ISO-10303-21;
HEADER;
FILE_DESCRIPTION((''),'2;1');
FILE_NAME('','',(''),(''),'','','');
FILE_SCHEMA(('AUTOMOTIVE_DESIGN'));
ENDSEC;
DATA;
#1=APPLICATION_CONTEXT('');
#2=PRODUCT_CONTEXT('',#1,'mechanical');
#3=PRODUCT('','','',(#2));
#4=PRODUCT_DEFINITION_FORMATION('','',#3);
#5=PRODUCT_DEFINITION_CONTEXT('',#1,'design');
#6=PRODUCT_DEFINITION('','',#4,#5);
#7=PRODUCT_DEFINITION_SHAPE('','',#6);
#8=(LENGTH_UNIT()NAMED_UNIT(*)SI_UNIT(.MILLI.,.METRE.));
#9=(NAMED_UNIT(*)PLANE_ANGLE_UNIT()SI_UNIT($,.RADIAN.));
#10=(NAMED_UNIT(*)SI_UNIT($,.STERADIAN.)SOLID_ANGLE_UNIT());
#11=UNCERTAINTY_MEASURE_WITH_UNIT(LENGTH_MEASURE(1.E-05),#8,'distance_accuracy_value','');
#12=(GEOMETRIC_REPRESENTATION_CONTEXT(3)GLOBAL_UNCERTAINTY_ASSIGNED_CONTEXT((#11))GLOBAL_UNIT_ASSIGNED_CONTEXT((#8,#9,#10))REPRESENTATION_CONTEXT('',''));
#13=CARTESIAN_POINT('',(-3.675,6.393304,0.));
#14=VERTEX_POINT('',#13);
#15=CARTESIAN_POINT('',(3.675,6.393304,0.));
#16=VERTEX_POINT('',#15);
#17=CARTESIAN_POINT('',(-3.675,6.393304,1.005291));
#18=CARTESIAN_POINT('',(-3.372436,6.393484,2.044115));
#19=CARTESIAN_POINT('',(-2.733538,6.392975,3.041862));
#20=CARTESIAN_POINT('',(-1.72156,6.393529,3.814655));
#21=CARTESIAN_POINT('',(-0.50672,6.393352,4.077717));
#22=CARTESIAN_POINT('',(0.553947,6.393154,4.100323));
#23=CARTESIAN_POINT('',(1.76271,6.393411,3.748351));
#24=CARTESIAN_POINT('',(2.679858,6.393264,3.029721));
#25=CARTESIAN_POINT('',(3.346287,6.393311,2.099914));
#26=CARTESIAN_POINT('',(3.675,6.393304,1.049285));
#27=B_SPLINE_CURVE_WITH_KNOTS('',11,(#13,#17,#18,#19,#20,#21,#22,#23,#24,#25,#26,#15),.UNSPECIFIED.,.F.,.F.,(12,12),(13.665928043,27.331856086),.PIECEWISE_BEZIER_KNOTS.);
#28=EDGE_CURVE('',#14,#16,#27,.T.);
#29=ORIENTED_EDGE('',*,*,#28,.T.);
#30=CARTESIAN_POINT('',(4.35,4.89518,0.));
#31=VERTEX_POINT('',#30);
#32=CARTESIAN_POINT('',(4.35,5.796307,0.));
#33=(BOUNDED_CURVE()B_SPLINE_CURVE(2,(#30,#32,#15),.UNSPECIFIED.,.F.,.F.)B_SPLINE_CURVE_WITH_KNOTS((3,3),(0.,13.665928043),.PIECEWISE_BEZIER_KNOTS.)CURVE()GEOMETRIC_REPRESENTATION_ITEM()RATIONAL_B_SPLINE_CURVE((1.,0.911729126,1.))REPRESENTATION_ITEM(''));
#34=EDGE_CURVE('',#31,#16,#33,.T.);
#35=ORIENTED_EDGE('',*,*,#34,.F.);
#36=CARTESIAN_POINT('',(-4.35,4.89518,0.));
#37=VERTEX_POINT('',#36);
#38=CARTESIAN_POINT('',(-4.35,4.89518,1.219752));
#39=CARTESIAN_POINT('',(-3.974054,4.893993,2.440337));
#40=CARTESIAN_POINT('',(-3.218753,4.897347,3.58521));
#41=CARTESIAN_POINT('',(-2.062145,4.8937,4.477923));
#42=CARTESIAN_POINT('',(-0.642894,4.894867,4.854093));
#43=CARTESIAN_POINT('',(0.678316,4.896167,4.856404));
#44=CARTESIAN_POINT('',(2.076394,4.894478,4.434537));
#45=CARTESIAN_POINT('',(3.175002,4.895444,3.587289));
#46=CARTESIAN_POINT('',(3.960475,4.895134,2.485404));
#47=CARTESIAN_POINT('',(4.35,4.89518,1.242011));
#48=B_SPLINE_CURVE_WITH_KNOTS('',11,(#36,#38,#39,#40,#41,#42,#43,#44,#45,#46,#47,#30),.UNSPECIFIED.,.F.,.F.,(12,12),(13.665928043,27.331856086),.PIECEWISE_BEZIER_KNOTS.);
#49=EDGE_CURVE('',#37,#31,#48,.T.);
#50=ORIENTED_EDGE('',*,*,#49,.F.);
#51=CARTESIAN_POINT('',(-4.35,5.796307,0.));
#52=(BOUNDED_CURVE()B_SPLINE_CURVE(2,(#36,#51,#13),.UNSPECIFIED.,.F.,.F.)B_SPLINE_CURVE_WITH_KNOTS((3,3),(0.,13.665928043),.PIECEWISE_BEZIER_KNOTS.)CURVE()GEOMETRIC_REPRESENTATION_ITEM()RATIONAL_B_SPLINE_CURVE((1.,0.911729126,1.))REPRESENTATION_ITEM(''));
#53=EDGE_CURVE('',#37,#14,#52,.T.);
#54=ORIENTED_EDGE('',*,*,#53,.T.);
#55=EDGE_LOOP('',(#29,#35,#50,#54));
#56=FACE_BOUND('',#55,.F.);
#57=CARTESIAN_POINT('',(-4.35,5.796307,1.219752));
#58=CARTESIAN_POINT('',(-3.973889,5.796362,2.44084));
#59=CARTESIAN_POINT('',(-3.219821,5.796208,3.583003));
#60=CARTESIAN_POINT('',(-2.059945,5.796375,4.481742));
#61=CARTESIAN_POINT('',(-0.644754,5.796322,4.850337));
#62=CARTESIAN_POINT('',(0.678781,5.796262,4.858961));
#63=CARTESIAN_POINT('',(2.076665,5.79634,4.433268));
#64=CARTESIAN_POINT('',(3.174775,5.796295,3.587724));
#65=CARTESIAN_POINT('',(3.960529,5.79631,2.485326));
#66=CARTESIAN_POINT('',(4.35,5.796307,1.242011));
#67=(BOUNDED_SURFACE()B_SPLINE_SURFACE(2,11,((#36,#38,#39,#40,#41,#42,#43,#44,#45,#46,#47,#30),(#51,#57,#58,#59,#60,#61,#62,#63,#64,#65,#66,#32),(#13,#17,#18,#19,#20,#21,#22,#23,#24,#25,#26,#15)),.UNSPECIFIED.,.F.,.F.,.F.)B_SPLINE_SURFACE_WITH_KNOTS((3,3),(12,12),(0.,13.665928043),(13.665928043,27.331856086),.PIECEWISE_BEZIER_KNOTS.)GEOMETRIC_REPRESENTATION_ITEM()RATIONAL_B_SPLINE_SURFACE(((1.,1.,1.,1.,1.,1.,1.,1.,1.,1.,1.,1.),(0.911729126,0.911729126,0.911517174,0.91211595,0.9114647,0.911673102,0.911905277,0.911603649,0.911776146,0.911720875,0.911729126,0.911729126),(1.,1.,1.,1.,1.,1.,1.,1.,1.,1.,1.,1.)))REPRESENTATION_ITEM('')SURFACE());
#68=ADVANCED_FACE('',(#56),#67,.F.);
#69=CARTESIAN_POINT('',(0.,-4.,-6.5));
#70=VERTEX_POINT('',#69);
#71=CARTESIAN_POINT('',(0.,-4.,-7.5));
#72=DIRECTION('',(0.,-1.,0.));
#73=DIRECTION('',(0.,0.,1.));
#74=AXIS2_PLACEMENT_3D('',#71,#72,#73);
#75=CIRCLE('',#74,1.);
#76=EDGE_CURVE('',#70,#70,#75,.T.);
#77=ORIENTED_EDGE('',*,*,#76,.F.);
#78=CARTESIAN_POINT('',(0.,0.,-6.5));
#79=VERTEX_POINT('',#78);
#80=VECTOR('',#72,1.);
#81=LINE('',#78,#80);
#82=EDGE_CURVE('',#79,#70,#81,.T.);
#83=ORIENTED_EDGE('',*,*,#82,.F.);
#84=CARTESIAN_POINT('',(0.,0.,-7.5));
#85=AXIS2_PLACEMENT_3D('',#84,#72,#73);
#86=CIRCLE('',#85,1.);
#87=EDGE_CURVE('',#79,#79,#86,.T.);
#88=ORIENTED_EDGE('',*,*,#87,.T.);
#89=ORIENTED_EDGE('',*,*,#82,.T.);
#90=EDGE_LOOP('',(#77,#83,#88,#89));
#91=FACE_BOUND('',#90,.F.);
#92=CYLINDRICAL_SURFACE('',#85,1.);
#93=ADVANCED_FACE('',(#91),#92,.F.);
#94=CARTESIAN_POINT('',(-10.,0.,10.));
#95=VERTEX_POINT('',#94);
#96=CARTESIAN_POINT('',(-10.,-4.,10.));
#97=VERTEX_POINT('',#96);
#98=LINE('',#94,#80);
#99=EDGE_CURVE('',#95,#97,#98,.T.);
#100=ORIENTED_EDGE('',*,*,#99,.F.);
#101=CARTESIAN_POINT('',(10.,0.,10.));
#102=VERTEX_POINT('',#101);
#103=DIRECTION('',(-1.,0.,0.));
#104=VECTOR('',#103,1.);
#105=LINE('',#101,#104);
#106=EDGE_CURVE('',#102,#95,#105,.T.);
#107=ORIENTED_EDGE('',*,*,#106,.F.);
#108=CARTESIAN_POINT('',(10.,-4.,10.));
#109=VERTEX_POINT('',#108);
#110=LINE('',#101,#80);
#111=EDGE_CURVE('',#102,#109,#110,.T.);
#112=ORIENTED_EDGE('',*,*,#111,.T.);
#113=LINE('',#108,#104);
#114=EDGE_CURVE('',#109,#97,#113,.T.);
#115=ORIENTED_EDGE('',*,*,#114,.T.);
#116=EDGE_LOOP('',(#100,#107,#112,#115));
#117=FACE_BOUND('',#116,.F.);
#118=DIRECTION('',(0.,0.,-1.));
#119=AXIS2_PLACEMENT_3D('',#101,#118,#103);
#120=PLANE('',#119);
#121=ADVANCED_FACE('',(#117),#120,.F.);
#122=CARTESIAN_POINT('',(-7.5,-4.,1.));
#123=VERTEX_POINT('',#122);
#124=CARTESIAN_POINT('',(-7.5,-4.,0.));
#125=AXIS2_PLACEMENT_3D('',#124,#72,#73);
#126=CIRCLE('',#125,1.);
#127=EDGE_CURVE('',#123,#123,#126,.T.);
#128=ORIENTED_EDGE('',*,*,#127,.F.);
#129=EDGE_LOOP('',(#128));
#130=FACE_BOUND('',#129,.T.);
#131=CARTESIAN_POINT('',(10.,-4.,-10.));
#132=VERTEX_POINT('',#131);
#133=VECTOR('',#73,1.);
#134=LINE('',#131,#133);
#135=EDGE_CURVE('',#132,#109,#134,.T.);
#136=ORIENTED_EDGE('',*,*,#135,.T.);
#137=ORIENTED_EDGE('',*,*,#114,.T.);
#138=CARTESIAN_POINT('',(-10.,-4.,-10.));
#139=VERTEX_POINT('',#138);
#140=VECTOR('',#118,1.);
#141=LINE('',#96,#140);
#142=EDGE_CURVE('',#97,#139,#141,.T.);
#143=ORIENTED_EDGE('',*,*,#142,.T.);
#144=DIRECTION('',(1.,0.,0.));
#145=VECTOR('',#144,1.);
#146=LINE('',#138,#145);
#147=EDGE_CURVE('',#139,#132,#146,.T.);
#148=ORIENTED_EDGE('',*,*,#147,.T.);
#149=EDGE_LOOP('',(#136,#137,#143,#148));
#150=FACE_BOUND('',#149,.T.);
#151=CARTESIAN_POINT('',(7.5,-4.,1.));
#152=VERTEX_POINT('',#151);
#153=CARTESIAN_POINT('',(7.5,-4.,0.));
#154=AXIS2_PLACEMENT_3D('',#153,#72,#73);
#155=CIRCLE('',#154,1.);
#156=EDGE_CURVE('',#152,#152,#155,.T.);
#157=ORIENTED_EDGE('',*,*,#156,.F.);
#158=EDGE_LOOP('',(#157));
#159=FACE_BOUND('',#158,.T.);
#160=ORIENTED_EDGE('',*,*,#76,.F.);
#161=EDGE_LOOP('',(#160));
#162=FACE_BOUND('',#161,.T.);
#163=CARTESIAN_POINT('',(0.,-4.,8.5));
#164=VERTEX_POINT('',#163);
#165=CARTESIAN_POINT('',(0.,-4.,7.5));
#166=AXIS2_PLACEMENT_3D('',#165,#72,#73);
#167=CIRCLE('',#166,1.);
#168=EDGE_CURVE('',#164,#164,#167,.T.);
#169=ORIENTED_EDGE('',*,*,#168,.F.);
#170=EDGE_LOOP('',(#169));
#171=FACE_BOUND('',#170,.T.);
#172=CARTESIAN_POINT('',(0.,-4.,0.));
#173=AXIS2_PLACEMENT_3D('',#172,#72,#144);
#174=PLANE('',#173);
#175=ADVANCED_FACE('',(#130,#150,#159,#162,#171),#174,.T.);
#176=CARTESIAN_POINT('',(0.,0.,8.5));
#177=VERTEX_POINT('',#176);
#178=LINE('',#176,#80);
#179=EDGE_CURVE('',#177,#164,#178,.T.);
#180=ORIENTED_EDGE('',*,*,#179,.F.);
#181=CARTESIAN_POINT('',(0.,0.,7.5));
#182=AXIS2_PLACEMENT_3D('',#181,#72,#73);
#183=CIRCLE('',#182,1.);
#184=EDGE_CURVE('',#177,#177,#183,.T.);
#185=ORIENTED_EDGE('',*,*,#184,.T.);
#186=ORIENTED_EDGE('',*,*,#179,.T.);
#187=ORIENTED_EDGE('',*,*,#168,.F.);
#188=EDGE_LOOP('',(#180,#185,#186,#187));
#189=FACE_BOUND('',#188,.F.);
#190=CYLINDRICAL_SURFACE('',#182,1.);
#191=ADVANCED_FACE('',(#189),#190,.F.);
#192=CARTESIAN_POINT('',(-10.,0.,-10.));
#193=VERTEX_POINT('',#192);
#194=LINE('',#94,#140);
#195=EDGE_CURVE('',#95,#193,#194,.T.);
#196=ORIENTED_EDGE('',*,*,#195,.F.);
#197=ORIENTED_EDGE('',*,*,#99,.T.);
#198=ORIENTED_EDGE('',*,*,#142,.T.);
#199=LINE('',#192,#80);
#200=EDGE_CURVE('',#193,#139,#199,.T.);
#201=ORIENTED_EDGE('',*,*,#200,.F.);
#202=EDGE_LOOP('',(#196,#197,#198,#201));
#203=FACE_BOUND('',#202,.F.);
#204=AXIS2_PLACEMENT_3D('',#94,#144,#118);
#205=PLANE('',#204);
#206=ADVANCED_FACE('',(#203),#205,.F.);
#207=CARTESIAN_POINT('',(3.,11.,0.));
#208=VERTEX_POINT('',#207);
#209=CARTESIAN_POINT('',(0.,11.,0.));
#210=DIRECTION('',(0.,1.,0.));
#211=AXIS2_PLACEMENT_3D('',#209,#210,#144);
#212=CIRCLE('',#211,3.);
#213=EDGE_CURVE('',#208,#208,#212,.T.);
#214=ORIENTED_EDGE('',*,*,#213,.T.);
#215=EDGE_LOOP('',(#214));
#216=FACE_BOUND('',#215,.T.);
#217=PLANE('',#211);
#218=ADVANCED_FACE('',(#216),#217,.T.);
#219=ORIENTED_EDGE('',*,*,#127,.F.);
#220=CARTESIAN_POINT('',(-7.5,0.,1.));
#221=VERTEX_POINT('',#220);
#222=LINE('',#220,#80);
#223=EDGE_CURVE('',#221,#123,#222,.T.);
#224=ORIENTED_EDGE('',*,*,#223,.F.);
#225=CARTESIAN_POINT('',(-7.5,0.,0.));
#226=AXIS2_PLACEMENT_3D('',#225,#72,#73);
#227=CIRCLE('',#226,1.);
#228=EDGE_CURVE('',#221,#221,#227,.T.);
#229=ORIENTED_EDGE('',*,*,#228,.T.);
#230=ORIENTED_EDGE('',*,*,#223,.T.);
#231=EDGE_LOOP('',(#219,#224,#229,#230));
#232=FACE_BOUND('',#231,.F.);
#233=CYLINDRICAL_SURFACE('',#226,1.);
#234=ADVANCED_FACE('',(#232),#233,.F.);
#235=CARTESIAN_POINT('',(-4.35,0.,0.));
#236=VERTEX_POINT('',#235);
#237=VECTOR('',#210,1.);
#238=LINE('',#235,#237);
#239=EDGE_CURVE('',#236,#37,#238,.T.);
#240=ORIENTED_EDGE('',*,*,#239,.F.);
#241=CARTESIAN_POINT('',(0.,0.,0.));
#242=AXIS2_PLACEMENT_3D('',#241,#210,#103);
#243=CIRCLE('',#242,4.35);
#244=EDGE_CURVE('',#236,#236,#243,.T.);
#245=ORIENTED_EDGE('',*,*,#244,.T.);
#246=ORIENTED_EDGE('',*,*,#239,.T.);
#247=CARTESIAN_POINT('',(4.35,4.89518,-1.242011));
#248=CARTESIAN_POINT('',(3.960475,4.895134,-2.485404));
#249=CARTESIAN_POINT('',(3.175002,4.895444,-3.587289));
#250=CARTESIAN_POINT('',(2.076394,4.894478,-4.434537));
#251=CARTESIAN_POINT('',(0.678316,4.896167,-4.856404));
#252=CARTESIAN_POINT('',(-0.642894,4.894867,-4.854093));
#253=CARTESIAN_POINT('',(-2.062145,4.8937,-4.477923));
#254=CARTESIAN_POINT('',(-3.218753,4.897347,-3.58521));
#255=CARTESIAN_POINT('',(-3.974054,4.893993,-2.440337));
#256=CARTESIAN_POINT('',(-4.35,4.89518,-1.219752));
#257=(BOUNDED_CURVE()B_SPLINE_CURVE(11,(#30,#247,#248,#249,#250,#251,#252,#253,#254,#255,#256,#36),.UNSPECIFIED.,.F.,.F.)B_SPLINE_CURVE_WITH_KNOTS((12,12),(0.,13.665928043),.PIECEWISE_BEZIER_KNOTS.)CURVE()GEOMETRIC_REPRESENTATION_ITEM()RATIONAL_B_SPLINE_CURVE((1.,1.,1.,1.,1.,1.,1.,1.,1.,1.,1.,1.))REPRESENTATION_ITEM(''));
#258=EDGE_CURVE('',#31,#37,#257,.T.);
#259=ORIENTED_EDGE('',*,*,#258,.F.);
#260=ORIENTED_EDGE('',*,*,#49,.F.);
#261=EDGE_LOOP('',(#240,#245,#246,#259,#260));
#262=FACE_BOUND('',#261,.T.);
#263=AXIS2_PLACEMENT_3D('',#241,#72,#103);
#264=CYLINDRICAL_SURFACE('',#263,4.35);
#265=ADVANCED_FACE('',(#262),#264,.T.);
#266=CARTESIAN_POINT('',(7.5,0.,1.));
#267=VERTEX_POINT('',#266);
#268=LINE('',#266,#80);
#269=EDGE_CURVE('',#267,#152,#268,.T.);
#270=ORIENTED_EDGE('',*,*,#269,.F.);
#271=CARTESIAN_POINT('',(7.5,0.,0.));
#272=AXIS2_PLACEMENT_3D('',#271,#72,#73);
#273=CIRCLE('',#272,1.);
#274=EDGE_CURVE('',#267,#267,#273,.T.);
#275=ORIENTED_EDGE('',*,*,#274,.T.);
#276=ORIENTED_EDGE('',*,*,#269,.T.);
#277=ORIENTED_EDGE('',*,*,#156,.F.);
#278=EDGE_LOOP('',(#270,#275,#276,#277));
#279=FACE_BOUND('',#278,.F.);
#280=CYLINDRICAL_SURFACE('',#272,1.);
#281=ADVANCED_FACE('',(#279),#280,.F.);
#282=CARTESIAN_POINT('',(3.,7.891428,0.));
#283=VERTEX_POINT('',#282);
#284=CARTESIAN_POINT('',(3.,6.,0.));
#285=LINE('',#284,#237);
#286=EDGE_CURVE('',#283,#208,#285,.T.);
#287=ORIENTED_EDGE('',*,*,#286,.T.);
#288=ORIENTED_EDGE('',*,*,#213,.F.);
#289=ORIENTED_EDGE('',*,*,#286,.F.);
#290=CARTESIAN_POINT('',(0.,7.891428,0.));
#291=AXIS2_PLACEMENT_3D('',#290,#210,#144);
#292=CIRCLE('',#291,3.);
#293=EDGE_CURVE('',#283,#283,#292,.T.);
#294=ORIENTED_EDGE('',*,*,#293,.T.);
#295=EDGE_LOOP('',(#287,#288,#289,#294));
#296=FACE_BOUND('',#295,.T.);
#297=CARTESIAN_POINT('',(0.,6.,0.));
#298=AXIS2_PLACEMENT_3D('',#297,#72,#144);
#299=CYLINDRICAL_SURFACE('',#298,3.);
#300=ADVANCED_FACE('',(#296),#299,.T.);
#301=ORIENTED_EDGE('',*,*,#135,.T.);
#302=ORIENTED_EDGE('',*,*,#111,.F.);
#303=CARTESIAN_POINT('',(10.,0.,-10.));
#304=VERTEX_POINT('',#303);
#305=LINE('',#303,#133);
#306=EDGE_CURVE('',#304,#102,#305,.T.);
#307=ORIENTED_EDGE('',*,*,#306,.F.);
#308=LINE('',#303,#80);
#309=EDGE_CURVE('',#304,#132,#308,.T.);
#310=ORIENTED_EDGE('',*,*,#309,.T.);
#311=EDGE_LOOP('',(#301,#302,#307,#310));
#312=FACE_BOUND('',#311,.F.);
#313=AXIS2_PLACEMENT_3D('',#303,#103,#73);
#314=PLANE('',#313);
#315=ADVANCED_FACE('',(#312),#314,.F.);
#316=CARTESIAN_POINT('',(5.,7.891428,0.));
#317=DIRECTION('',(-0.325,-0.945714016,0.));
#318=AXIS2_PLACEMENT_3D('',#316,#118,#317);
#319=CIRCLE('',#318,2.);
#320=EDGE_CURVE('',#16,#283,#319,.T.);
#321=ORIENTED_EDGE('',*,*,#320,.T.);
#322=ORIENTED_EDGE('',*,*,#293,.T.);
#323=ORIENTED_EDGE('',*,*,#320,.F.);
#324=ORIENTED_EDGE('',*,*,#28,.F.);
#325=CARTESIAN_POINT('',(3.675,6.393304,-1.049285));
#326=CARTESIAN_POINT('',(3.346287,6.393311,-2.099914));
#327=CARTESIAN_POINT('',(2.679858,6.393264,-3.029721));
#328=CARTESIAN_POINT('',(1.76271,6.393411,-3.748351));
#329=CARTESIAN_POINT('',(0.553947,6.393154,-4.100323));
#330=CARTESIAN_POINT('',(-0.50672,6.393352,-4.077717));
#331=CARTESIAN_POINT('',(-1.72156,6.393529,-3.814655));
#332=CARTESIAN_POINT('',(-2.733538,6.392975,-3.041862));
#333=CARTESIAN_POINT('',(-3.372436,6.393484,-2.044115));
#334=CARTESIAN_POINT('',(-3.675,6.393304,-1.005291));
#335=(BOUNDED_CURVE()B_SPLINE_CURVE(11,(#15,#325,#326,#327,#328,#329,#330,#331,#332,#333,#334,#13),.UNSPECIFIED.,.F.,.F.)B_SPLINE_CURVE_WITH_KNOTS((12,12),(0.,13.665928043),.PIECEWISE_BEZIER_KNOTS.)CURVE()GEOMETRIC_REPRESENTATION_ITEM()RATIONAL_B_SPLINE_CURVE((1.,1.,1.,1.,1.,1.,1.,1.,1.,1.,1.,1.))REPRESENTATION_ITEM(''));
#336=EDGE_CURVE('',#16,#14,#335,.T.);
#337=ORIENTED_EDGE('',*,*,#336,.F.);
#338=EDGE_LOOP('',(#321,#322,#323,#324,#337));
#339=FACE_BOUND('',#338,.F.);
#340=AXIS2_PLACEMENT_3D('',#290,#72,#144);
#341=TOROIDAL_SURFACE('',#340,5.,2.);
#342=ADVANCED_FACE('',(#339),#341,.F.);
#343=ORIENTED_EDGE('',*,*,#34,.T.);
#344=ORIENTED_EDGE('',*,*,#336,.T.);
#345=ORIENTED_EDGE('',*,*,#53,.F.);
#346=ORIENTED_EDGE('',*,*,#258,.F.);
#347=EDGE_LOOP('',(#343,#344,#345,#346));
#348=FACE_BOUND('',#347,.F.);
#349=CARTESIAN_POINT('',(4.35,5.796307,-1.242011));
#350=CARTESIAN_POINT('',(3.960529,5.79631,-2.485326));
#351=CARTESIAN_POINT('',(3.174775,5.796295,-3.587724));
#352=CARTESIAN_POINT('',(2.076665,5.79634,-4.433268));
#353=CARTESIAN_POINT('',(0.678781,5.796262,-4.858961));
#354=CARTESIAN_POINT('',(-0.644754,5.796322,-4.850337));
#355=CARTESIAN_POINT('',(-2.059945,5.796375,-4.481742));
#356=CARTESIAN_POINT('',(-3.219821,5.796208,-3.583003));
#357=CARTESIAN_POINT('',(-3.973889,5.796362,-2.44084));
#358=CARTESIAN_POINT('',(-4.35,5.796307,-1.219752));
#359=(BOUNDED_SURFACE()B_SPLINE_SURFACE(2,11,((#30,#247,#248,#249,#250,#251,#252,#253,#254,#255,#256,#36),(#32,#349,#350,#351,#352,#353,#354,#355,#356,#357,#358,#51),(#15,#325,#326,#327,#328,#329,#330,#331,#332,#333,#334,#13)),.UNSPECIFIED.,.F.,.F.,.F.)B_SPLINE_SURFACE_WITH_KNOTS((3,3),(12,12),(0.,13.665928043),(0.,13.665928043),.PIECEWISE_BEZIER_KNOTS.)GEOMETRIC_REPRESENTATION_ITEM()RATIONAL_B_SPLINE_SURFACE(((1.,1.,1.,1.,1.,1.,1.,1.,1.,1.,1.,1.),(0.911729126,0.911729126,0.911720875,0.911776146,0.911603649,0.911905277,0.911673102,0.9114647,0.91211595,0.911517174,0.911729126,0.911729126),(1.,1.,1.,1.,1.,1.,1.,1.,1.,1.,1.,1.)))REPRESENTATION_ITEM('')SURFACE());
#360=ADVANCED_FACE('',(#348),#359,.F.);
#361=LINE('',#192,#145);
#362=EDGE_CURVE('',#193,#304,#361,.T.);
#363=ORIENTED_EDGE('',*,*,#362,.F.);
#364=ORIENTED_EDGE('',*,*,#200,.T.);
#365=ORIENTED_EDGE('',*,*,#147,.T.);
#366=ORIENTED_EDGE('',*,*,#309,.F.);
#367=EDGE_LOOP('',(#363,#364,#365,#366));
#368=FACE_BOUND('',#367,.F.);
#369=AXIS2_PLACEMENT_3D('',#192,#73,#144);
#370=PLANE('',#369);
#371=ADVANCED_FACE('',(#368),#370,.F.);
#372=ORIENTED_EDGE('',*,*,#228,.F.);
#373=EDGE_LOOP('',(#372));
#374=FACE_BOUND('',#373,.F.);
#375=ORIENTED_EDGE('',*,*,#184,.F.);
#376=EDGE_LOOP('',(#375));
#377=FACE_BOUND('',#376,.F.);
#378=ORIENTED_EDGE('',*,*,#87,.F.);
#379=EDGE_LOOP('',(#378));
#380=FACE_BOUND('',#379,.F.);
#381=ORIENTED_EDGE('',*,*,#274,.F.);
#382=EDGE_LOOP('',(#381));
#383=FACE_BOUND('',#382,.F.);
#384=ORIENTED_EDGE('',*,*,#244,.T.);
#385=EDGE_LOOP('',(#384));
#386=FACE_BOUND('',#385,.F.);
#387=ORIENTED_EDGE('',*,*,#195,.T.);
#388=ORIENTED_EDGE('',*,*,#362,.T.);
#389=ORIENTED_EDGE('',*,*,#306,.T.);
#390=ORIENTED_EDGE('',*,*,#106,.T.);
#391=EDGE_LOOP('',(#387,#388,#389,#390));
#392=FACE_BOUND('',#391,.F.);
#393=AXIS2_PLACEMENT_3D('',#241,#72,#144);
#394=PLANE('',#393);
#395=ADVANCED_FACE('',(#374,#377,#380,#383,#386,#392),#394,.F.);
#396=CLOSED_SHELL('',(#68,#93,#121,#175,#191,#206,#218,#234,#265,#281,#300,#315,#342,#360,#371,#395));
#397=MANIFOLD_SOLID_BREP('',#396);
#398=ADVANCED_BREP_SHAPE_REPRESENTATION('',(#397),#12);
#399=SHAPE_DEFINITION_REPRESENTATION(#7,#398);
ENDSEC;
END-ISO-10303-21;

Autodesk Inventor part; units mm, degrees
ref_plane "YZ Plane" through (0, 0, 0) normal (1, 0, 0) x (0, 1, 0)
ref_plane "XZ Plane" through (0, 0, 0) normal (0, 1, 0) x (-1, 0, 0)
ref_plane "XY Plane" through (0, 0, 0) normal (0, 0, 1) x (1, 0, 0)
sketch "Sketch1" plane through (0, 0, 0) normal (0, 1, 0) x (-1, 0, 0)
  circle A0 centre (0, 0) radius 4.35
  dimension "d0" = 8.7
extrude "Extrusion1" add sketch "Sketch1" along normal blind 6
sketch "Sketch2" plane through (0, 6, 0) normal (0, 1, 0) x (1, 0, 0)
  circle A0 centre (0, 0) radius 3
  dimension "d3" = 6
extrude "Extrusion2" add sketch "Sketch2" along normal blind 5
fillet "Fillet1" radius 2 1 edges at (-3, 6, 0)
sketch "Sketch3" plane through (0, 0, 0) normal (0, -1, 0) x (1, 0, 0)
  line L0 (-10, -10) -> (10, -10)
  line L1 (10, -10) -> (10, 10)
  line L2 (10, 10) -> (-10, 10)
  line L3 (-10, 10) -> (-10, -10)
  line L4 (-10, -10) -> (10, 10) construction
  line L5 (10, -10) -> (-10, 10) construction
  point P0 (0, 0)
  dimension "d7" = 20
  dimension "d8" = 20
extrude "Extrusion3" add sketch "Sketch3" along normal blind 4
sketch "Sketch4" plane through (0, 0, 0) normal (0, 1, 0) x (1, 0, 0)
  circle A0 centre (0, 0) radius 3 projected
  circle A1 centre (0, 0) radius 7.5
  circle A2 centre (-7.5, 0) radius 1
  circle A3 centre (0, -7.5) radius 1
  circle A4 centre (7.5, 0) radius 1
  circle A5 centre (0, 7.5) radius 1
  dimension "d11" = 15
  dimension "d12" = 2
  dimension "d15" = 360
hole "Hole1" at (-7.5, 0, 0) at (0, 0, 7.5) at (7.5, 0, 0) at (0, 0, -7.5) direction (0, -1, 0) diameter 2 end through all
fillet "Fillet2" radius 2 2 edges at (0, 6, -4.35) (0, 6, 4.35)
equation "\"d22\" = Thickness"
equation "\"BendRadius\" = Thickness"
equation "\"BendReliefWidth\" = Thickness"
equation "\"BendReliefDepth\" = 0.5 * Thickness"
equation "\"CornerReliefSize\" = 4 * Thickness"
equation "\"MinimumRemnant\" = 2 * Thickness"
equation "\"TransitionRadius\" = BendRadius"
equation "\"JacobiRadiusSize\" = BendRadius"
equation "\"GapSize\" = Thickness"
equation "\"Thickness\" = 0.5"
properties part number "placeHolder"
